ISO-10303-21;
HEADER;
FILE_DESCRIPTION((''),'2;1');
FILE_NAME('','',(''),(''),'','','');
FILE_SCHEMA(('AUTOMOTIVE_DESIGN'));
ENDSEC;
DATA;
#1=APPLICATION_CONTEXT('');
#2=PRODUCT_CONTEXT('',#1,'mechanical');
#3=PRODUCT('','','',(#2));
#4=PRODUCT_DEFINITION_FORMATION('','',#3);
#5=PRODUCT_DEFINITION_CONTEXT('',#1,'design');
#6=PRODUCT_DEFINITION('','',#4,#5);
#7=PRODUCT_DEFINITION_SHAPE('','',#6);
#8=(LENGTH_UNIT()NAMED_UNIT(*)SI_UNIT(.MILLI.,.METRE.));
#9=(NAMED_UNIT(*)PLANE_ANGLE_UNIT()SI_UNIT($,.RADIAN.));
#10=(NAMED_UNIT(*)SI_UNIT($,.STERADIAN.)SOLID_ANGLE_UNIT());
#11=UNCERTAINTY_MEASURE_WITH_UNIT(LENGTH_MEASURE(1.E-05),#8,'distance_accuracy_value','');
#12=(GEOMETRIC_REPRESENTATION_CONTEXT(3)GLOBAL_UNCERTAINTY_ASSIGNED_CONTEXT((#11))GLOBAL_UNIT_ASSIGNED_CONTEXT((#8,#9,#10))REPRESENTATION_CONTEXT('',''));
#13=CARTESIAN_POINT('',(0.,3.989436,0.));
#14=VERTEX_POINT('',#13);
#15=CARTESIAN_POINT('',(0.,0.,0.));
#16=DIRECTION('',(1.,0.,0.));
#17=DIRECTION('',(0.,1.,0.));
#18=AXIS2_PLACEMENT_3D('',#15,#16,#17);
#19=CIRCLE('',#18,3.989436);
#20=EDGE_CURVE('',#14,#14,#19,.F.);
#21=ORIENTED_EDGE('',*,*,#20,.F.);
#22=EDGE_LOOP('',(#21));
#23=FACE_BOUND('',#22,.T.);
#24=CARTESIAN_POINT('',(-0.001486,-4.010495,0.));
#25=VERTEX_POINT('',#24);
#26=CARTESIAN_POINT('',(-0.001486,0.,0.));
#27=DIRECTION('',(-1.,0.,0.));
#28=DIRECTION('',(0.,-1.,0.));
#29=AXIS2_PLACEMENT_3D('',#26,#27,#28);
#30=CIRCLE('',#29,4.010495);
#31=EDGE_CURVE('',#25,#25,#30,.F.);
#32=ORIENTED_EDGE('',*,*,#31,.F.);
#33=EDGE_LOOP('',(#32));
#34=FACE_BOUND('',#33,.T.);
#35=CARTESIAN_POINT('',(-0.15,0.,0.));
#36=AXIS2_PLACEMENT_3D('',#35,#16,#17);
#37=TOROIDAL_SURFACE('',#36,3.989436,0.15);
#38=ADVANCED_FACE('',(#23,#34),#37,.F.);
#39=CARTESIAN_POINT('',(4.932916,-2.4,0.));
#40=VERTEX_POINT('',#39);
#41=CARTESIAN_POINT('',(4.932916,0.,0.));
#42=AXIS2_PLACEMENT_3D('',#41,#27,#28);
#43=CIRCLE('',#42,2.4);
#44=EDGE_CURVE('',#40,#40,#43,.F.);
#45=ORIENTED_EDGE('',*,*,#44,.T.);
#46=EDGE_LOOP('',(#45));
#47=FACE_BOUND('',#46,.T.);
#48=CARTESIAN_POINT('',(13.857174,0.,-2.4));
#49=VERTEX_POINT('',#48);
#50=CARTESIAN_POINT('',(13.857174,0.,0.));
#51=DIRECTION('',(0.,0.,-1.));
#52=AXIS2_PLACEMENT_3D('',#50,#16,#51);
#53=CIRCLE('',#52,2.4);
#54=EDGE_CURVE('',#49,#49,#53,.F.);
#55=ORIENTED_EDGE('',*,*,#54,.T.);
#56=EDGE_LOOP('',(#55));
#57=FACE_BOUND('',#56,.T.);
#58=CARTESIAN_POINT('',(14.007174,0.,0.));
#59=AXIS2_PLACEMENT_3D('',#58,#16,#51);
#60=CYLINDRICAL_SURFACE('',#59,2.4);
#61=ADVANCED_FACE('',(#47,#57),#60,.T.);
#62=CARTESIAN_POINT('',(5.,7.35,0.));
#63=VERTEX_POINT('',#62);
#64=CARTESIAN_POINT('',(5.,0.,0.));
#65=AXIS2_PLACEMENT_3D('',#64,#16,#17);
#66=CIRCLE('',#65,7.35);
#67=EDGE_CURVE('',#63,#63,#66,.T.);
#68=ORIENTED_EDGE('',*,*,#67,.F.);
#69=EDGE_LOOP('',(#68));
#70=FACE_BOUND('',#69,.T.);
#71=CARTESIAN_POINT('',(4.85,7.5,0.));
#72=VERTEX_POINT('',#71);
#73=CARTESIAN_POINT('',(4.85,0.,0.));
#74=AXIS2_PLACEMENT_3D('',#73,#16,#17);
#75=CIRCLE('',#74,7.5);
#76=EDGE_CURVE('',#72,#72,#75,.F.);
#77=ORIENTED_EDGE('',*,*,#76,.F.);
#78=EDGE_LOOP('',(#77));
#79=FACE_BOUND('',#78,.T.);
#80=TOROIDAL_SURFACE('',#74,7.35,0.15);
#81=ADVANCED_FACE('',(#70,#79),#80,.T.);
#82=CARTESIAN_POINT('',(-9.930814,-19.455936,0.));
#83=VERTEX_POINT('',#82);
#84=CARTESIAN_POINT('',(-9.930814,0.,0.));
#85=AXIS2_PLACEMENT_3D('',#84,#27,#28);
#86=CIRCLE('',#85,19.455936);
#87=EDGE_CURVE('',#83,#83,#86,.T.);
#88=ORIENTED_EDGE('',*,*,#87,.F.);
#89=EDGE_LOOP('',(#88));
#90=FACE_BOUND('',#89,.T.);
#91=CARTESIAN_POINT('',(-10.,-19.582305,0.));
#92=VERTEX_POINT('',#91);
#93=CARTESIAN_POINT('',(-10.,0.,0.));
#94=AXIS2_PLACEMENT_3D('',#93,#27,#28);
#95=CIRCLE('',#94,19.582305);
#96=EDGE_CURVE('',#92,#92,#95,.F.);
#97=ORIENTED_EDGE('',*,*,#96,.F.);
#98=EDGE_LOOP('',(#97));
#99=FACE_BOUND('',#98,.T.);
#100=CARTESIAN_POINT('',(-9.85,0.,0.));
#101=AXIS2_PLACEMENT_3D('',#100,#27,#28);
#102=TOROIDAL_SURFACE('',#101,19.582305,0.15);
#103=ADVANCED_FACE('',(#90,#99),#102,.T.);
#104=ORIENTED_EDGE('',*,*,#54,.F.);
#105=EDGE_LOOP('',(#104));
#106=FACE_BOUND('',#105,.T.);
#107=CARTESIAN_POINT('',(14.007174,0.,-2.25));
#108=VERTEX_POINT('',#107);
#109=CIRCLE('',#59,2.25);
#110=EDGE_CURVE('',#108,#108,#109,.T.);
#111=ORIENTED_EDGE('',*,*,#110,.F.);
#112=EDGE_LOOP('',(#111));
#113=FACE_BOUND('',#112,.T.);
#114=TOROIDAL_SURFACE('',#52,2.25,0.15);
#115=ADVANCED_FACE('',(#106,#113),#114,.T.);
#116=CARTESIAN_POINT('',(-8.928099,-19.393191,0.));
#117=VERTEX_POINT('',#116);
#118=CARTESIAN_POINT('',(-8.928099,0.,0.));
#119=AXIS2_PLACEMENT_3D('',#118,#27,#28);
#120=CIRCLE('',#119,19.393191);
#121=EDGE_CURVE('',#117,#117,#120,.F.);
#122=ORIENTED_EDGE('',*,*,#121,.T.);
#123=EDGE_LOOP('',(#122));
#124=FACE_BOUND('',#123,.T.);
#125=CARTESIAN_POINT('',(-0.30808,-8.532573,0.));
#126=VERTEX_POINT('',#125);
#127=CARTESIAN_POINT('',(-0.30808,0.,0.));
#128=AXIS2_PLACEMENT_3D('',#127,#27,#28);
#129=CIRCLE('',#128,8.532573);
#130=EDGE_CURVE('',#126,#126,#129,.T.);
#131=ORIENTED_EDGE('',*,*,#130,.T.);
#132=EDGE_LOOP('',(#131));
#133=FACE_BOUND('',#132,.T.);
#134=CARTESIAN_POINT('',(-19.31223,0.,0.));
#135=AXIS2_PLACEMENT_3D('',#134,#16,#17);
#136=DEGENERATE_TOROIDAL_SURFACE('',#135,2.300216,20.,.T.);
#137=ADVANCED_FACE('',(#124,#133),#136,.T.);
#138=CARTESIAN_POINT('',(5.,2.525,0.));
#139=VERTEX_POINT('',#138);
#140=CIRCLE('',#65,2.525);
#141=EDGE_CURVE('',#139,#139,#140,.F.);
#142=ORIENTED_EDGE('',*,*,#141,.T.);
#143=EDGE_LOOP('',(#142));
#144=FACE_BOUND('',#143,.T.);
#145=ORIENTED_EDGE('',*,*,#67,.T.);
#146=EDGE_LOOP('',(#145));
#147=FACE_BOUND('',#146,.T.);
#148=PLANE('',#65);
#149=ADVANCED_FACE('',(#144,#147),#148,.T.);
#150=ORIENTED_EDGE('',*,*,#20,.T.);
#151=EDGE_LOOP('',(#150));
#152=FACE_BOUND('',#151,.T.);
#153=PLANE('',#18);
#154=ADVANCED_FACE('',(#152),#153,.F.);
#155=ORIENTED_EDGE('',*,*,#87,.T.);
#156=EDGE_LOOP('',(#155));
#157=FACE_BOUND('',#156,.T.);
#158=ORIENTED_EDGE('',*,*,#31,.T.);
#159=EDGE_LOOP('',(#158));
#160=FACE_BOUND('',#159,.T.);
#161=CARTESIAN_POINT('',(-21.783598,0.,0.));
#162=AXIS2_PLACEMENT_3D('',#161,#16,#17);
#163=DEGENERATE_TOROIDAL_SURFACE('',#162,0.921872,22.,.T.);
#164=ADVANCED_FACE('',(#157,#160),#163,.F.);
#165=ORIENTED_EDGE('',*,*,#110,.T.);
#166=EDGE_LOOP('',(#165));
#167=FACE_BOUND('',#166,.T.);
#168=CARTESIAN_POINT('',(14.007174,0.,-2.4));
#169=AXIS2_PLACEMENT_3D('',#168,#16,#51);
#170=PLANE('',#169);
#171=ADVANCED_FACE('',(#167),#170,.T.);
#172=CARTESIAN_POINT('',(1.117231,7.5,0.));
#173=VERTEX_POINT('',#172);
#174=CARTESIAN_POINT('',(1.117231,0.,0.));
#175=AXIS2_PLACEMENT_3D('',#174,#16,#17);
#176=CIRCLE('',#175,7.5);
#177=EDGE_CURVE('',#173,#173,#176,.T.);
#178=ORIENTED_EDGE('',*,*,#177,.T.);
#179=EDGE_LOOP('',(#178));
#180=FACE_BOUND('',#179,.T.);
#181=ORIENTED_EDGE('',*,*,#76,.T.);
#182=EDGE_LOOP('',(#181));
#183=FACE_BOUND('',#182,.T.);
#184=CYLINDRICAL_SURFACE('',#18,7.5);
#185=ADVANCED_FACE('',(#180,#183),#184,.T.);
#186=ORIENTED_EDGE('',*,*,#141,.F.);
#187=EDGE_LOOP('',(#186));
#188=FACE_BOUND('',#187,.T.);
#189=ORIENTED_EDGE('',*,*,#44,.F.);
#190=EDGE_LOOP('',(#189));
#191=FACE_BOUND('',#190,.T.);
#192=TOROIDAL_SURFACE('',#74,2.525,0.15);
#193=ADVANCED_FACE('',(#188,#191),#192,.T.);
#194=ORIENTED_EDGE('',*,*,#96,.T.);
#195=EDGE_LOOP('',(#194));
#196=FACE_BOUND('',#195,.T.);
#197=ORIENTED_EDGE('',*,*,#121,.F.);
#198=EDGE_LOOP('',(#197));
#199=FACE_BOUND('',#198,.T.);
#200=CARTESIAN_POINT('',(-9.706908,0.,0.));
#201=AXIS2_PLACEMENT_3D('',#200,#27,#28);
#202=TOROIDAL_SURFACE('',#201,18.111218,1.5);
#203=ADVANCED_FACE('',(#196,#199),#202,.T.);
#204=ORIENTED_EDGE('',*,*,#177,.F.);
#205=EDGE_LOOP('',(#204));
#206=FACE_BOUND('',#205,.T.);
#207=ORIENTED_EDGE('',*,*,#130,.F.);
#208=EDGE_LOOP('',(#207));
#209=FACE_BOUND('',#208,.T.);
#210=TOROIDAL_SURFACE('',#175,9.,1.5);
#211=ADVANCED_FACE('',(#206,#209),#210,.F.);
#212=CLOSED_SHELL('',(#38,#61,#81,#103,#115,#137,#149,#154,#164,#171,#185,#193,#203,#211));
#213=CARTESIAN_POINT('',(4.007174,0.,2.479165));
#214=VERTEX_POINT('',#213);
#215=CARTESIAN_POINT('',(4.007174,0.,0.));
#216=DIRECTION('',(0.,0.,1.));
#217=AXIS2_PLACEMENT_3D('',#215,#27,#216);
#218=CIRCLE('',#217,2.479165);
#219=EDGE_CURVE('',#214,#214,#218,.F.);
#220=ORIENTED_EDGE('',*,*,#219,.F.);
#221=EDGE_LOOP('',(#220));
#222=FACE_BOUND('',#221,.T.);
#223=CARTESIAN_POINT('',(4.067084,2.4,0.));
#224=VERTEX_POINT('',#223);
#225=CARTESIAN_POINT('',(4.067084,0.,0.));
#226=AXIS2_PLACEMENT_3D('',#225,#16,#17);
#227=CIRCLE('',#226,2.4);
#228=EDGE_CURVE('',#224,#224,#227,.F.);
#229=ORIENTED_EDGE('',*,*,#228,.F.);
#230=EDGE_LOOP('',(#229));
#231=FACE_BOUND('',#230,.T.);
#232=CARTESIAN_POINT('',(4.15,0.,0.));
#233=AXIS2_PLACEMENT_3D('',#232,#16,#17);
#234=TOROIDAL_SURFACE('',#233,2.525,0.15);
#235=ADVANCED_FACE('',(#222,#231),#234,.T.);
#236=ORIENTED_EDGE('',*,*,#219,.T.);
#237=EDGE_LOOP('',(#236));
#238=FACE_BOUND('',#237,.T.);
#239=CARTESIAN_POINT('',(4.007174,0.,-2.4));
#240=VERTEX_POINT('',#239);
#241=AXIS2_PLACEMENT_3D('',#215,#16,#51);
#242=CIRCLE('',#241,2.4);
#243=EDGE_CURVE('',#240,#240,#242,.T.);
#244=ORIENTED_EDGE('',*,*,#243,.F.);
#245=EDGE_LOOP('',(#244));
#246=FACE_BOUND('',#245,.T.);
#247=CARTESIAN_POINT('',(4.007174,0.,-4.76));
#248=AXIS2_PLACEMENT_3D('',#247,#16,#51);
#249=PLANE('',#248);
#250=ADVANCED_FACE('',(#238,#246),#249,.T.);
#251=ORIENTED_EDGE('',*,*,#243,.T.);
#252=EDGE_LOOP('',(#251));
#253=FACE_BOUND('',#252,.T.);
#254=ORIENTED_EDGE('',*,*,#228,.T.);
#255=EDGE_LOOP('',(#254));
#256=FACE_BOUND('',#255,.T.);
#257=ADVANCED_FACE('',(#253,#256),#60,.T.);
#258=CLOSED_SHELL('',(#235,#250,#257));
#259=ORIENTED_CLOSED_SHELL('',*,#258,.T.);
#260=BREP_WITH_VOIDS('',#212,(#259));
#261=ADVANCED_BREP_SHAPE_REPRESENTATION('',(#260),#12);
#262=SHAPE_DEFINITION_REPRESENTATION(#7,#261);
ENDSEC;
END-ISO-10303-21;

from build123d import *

# Parameters (mm, degrees)
FILLET1_R = 0.15
FILLET2_R = 1.5
FILLET3_R = 0.15


with BuildPart() as part:
    # Sketch1 → Revolve2 (revolve)
    with BuildSketch(Plane.XY):
        with BuildLine():
            Line((0, 4), (0, 0))
            Line((0, 0), (2, 0))
            Line((2, 0), (2, 4.75))
            Line((2, 4.75), (4, 4.75))
            Line((4, 4.75), (4, 2.375))
            Line((4, 2.375), (5, 2.375))
            Line((5, 2.375), (5, 7.5))
            Line((5, 7.5), (0, 7.5))
            ThreePointArc((0, 7.5), (-3.694854211, 14.794116631), (-10, 20))
            Line((-10, 20), (-10, 19.5))
            ThreePointArc((-10, 19.5), (-3.297071482, 12.84866356), (0, 4))
        make_face()
    revolve(axis=Axis((0, 0, 0), (-1, 0, 0)))

    # Fillet1
    fillet1_edges = [part.edges().sort_by_distance(p)[0] for p in [
        (5, -7.5, 0),
        (5, -2.375, 0),
        (4, -2.375, 0),
        (0, -4, 0),
        (-10, -19.5, 0),
    ]]
    fillet(fillet1_edges, radius=FILLET1_R)

    # Fillet2
    # the kernel refuses this fillet: 1.5 mm, written as the material it adds along each edge
    with BuildSketch(Plane(origin=(0, 0, 0), x_dir=(0, 1, 0), z_dir=(0, 0, 1))) as fillet2_piece_1:
        with BuildLine():
            CenterArc((9, -1.117230926), FILLET2_R, 108.15675825, 71.84324175)
            Line((7.5, -1.117230926), (7.5, 0))
            ThreePointArc((7.5, 0), (8.018361801, 0.147084824), (8.532573187, 0.308080329))
        make_face()
    revolve(axis=Axis((0, 0, 0), (-1, 0, 0)))
    # the kernel refuses this fillet: 1.5 mm, written as the material it takes off along each edge
    with BuildSketch(Plane(origin=(-10, 0, 0), x_dir=(0, 1, 0), z_dir=(0, 0, 1))) as fillet2_2_piece_1:
        with BuildLine():
            CenterArc((18.111217478, -0.293092194), FILLET2_R, 328.720951381, 42.546835999)
            ThreePointArc((19.393190597, -1.071902134), (19.704849183, -0.540623634), (20, 0))
            Line((20, 0), (19.58230448, 0))
        make_face()
    revolve(axis=Axis((-10, 0, 0), (-1, 0, 0)), mode=Mode.SUBTRACT)

    # Sketch2 → Revolve3 (revolve)
    with BuildSketch(Plane(origin=(0, 0, 0), x_dir=(1, 0, 0), z_dir=(0, 1, 0))):
        Polygon((2, 0), (2, 4.76), (4.007174432, 4.76), (4.007174432, 2.4), (14.007174432, 2.4), (14.007174432, 0), align=None)
    revolve(axis=Axis((14.007174432, 0, 0), (-1, 0, 0)))

    # Fillet3
    fillet3_edges = [part.edges().sort_by_distance(p)[0] for p in [
        (14.007174432, 0, 2.4),
    ]]
    fillet(fillet3_edges, radius=FILLET3_R)


solid = part.part
